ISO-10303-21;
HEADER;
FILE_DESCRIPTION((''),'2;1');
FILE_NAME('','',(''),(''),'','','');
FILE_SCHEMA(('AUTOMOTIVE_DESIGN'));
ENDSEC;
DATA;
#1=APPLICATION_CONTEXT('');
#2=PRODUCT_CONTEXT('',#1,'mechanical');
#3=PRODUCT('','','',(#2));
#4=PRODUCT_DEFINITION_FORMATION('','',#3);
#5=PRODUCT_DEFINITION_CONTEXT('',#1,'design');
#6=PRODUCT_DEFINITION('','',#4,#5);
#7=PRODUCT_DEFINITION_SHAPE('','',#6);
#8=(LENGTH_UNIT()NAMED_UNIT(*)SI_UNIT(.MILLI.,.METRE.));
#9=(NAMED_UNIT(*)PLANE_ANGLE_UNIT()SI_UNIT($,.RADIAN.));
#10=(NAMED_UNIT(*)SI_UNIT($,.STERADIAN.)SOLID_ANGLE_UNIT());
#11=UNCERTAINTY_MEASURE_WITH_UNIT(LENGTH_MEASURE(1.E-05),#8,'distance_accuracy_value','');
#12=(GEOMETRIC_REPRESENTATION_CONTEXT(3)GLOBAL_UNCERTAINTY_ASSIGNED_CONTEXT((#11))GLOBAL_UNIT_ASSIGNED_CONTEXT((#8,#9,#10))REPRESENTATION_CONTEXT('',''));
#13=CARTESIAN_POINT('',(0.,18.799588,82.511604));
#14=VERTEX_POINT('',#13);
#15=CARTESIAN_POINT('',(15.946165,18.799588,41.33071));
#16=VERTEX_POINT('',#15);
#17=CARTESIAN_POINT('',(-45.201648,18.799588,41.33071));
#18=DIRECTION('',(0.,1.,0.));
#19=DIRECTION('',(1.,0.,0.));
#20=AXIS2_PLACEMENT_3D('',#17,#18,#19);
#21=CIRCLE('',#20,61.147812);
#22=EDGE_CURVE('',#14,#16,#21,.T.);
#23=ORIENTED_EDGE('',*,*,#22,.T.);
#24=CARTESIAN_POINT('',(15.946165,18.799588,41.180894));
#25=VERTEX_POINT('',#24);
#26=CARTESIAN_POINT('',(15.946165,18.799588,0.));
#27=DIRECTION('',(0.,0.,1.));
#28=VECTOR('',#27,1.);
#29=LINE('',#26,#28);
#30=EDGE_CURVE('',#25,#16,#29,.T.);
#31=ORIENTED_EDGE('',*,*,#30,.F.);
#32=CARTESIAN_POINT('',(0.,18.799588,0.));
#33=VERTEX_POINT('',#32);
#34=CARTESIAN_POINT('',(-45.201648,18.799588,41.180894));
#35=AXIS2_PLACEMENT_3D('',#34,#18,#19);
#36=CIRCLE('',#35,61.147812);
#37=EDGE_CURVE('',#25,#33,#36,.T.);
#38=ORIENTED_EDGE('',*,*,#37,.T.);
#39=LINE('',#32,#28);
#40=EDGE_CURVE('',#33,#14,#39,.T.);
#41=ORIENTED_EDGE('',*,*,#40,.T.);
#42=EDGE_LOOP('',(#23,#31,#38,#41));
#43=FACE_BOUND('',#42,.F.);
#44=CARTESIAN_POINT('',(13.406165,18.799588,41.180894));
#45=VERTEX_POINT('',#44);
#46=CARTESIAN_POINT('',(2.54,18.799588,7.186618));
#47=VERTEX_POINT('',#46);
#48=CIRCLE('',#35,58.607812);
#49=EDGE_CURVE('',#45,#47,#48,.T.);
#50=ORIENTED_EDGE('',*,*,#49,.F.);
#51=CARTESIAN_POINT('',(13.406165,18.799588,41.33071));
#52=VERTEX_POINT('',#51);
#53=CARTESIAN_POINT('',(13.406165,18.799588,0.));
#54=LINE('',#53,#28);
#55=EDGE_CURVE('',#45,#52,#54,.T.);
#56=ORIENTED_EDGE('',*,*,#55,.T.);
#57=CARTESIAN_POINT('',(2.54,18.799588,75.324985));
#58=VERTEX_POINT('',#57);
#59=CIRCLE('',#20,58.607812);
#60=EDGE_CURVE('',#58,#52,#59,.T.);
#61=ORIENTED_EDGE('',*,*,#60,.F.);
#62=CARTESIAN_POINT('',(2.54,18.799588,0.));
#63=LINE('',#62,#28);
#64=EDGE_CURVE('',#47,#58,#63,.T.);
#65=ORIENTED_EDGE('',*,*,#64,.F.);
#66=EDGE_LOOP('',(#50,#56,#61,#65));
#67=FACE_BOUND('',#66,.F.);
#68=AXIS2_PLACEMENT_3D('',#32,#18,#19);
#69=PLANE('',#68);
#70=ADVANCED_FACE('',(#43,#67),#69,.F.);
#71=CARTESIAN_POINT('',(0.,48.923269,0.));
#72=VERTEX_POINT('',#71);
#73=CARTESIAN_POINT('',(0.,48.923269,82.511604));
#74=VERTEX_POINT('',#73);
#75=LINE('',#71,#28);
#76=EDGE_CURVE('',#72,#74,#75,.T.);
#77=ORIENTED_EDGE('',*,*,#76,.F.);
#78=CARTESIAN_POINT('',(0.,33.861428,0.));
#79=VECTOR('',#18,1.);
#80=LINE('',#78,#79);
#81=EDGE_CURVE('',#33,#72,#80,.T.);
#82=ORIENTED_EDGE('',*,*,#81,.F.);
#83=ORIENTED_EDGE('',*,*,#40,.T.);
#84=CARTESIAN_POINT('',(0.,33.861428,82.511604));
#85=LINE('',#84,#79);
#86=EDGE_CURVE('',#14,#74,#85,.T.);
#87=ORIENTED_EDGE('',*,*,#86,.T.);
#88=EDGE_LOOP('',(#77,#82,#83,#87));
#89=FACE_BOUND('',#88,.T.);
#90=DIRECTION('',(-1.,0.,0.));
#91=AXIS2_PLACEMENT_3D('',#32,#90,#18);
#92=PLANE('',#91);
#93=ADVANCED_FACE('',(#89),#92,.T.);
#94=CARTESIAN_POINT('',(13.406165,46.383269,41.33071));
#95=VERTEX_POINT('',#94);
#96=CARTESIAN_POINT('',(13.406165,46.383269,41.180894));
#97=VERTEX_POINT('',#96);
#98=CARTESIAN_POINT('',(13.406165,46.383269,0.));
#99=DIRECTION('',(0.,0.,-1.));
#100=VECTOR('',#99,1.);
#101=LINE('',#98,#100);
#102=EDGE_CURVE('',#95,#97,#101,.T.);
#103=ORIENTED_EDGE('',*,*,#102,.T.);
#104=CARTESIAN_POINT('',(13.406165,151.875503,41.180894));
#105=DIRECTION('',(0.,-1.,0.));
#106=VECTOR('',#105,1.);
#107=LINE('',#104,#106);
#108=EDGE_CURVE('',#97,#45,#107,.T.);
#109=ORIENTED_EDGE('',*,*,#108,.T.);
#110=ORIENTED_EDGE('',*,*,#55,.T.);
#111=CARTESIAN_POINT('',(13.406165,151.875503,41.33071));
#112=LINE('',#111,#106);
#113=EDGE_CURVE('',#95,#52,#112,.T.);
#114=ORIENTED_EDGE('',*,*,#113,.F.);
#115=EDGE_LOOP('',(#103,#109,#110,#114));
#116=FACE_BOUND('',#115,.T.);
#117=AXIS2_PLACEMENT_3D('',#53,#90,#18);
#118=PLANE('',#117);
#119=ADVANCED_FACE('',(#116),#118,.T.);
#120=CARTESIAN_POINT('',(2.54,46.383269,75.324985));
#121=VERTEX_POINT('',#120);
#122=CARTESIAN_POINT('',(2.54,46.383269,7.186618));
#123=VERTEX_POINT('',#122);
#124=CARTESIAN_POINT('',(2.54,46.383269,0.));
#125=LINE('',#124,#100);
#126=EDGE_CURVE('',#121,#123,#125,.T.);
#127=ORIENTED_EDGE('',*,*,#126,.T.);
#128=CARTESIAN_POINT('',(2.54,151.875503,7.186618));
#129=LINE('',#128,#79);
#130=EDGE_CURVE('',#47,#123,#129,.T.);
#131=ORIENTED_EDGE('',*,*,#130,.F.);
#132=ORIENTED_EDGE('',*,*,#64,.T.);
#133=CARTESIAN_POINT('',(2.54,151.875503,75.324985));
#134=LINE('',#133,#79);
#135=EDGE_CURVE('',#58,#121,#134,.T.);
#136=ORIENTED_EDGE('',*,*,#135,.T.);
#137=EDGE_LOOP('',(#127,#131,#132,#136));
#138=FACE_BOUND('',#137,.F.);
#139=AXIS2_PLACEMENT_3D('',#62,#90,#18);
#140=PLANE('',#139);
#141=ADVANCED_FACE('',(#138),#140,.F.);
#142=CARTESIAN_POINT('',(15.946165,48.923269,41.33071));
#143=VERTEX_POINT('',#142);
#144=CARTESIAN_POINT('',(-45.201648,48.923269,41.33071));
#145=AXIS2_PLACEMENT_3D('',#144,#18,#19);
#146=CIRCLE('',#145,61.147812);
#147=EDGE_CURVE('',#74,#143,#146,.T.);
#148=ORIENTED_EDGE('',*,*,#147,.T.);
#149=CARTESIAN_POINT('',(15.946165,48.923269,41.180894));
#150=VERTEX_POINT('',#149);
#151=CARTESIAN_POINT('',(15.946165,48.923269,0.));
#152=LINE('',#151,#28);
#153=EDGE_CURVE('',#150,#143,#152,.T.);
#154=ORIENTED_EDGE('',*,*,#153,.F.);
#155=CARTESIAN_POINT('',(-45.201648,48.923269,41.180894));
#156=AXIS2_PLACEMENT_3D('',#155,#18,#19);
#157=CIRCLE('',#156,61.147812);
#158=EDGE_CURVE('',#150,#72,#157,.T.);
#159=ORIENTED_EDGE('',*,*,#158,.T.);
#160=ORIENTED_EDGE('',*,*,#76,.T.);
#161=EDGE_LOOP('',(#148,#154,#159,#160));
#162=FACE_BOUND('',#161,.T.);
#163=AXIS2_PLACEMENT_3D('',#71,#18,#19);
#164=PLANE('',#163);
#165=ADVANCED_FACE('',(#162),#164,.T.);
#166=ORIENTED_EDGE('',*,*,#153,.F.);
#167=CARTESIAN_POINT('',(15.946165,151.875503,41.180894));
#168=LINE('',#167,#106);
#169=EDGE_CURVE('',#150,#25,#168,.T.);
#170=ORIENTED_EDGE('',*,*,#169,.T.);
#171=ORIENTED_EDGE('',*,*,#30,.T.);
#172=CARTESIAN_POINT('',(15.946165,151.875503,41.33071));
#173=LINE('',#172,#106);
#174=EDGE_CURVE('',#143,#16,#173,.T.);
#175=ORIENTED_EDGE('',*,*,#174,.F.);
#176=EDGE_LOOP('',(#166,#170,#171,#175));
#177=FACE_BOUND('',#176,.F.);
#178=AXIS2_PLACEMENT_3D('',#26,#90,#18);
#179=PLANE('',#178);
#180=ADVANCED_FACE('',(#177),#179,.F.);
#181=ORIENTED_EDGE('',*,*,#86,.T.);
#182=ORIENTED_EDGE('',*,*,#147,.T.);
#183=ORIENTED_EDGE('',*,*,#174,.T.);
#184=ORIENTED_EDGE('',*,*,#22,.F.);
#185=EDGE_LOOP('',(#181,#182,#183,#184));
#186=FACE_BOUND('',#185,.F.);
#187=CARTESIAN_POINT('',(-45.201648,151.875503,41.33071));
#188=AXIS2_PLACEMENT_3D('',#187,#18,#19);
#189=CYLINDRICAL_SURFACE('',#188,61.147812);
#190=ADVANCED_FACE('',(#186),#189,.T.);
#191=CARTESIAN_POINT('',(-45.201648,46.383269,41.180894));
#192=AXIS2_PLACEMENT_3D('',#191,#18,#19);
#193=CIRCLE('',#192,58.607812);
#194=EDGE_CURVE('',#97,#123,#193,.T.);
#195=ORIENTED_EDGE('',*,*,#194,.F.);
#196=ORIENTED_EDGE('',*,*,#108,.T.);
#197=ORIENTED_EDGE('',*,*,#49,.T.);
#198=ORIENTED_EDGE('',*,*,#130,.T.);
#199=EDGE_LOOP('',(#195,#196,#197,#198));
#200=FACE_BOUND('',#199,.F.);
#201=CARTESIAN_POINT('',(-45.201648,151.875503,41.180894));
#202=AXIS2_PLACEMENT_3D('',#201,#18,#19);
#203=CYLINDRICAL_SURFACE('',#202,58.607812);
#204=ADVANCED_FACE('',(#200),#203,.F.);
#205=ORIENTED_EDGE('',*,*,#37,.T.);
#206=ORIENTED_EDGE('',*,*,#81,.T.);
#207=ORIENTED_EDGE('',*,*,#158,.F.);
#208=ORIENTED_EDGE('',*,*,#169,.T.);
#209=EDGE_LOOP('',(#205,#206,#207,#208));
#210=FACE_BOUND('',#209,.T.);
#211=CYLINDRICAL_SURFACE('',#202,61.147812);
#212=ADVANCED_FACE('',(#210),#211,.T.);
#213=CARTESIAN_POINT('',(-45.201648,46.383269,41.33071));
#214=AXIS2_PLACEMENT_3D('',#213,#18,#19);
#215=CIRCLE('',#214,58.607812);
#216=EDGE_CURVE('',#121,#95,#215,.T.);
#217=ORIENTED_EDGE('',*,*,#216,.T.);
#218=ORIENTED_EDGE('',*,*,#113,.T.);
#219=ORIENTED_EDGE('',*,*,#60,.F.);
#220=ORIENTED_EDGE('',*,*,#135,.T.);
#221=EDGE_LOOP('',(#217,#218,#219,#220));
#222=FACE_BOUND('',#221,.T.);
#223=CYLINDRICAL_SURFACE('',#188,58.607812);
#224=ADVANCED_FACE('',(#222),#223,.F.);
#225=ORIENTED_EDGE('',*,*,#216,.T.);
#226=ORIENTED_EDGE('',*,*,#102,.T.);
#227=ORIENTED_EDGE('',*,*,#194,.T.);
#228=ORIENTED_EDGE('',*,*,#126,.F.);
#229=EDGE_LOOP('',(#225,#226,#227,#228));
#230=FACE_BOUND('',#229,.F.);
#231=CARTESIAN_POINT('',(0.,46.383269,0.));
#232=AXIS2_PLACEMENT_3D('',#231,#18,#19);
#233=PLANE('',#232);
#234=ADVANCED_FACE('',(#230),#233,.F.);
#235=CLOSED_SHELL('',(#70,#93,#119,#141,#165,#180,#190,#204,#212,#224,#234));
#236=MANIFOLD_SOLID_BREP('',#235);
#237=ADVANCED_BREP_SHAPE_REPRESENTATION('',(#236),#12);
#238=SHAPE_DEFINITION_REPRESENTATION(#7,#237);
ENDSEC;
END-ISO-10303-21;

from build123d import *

# Parameters (mm, degrees)
F0_W        = 15.9461647272
F0_H        = 30.12368083
F1_DEPTH    = 82.5116038322
F2_T1_DEPTH = 236.0281493159
F3_T        = -2.54


# Not quite as in the source:
# - a fillet or chamfer that OpenCascade refuses, or shapes differently, is made with other operations: its cross-section is extruded or revolved along the edge and cut away or added


with BuildPart() as f1:
    # F0 (on Top) → F1 (new body)
    with BuildSketch(Plane.XY):
        with Locations((7.9730823636, 33.8614284992)):
            Rectangle(F0_W, F0_H)
    extrude(amount=F1_DEPTH)

    # F2: fillet of radius 61.1478122974 on 2 edges, made by hand

    # F2_s2 → F2_t1 (cut)
    with BuildSketch(Plane.XZ.offset(-151.8755031572)):
        with BuildLine():
            ThreePointArc((15.9461647272, 41.3307101351), (11.8204394221, 63.4109398395), (0, 82.5116038322))
            Line((0, 82.5116038322), (0.9040329514, 83.3352217062))
            ThreePointArc((0.9040329514, 83.3352217062), (7.9730823636, 83.7345600782), (15.9461647272, 83.7345600782))
            Line((15.9461647272, 83.7345600782), (17.1691209732, 82.5116038322))
            Line((17.1691209732, 82.5116038322), (17.1691209732, 41.3307101351))
            Line((17.1691209732, 41.3307101351), (15.9461647272, 41.3307101351))
        make_face()
        with BuildLine():
            ThreePointArc((15.9461647272, 41.1808936972), (11.8204394221, 19.1006639927), (0, 0))
            Line((0, 0), (0.9040329514, -0.8236178739))
            ThreePointArc((0.9040329514, -0.8236178739), (7.9730823636, -1.2229562459), (15.9461647272, -1.2229562459))
            Line((15.9461647272, -1.2229562459), (17.1691209732, 0))
            Line((17.1691209732, 0), (17.1691209732, 41.1808936972))
            Line((17.1691209732, 41.1808936972), (15.9461647272, 41.1808936972))
        make_face()
    extrude(amount=F2_T1_DEPTH, mode=Mode.SUBTRACT)

    # F3
    f3_openings = [f1.faces().sort_by_distance(p)[0] for p in [
        (6.459613, 18.799588, 41.255802),
    ]]
    offset(amount=F3_T, openings=f3_openings)


solid = f1.part
